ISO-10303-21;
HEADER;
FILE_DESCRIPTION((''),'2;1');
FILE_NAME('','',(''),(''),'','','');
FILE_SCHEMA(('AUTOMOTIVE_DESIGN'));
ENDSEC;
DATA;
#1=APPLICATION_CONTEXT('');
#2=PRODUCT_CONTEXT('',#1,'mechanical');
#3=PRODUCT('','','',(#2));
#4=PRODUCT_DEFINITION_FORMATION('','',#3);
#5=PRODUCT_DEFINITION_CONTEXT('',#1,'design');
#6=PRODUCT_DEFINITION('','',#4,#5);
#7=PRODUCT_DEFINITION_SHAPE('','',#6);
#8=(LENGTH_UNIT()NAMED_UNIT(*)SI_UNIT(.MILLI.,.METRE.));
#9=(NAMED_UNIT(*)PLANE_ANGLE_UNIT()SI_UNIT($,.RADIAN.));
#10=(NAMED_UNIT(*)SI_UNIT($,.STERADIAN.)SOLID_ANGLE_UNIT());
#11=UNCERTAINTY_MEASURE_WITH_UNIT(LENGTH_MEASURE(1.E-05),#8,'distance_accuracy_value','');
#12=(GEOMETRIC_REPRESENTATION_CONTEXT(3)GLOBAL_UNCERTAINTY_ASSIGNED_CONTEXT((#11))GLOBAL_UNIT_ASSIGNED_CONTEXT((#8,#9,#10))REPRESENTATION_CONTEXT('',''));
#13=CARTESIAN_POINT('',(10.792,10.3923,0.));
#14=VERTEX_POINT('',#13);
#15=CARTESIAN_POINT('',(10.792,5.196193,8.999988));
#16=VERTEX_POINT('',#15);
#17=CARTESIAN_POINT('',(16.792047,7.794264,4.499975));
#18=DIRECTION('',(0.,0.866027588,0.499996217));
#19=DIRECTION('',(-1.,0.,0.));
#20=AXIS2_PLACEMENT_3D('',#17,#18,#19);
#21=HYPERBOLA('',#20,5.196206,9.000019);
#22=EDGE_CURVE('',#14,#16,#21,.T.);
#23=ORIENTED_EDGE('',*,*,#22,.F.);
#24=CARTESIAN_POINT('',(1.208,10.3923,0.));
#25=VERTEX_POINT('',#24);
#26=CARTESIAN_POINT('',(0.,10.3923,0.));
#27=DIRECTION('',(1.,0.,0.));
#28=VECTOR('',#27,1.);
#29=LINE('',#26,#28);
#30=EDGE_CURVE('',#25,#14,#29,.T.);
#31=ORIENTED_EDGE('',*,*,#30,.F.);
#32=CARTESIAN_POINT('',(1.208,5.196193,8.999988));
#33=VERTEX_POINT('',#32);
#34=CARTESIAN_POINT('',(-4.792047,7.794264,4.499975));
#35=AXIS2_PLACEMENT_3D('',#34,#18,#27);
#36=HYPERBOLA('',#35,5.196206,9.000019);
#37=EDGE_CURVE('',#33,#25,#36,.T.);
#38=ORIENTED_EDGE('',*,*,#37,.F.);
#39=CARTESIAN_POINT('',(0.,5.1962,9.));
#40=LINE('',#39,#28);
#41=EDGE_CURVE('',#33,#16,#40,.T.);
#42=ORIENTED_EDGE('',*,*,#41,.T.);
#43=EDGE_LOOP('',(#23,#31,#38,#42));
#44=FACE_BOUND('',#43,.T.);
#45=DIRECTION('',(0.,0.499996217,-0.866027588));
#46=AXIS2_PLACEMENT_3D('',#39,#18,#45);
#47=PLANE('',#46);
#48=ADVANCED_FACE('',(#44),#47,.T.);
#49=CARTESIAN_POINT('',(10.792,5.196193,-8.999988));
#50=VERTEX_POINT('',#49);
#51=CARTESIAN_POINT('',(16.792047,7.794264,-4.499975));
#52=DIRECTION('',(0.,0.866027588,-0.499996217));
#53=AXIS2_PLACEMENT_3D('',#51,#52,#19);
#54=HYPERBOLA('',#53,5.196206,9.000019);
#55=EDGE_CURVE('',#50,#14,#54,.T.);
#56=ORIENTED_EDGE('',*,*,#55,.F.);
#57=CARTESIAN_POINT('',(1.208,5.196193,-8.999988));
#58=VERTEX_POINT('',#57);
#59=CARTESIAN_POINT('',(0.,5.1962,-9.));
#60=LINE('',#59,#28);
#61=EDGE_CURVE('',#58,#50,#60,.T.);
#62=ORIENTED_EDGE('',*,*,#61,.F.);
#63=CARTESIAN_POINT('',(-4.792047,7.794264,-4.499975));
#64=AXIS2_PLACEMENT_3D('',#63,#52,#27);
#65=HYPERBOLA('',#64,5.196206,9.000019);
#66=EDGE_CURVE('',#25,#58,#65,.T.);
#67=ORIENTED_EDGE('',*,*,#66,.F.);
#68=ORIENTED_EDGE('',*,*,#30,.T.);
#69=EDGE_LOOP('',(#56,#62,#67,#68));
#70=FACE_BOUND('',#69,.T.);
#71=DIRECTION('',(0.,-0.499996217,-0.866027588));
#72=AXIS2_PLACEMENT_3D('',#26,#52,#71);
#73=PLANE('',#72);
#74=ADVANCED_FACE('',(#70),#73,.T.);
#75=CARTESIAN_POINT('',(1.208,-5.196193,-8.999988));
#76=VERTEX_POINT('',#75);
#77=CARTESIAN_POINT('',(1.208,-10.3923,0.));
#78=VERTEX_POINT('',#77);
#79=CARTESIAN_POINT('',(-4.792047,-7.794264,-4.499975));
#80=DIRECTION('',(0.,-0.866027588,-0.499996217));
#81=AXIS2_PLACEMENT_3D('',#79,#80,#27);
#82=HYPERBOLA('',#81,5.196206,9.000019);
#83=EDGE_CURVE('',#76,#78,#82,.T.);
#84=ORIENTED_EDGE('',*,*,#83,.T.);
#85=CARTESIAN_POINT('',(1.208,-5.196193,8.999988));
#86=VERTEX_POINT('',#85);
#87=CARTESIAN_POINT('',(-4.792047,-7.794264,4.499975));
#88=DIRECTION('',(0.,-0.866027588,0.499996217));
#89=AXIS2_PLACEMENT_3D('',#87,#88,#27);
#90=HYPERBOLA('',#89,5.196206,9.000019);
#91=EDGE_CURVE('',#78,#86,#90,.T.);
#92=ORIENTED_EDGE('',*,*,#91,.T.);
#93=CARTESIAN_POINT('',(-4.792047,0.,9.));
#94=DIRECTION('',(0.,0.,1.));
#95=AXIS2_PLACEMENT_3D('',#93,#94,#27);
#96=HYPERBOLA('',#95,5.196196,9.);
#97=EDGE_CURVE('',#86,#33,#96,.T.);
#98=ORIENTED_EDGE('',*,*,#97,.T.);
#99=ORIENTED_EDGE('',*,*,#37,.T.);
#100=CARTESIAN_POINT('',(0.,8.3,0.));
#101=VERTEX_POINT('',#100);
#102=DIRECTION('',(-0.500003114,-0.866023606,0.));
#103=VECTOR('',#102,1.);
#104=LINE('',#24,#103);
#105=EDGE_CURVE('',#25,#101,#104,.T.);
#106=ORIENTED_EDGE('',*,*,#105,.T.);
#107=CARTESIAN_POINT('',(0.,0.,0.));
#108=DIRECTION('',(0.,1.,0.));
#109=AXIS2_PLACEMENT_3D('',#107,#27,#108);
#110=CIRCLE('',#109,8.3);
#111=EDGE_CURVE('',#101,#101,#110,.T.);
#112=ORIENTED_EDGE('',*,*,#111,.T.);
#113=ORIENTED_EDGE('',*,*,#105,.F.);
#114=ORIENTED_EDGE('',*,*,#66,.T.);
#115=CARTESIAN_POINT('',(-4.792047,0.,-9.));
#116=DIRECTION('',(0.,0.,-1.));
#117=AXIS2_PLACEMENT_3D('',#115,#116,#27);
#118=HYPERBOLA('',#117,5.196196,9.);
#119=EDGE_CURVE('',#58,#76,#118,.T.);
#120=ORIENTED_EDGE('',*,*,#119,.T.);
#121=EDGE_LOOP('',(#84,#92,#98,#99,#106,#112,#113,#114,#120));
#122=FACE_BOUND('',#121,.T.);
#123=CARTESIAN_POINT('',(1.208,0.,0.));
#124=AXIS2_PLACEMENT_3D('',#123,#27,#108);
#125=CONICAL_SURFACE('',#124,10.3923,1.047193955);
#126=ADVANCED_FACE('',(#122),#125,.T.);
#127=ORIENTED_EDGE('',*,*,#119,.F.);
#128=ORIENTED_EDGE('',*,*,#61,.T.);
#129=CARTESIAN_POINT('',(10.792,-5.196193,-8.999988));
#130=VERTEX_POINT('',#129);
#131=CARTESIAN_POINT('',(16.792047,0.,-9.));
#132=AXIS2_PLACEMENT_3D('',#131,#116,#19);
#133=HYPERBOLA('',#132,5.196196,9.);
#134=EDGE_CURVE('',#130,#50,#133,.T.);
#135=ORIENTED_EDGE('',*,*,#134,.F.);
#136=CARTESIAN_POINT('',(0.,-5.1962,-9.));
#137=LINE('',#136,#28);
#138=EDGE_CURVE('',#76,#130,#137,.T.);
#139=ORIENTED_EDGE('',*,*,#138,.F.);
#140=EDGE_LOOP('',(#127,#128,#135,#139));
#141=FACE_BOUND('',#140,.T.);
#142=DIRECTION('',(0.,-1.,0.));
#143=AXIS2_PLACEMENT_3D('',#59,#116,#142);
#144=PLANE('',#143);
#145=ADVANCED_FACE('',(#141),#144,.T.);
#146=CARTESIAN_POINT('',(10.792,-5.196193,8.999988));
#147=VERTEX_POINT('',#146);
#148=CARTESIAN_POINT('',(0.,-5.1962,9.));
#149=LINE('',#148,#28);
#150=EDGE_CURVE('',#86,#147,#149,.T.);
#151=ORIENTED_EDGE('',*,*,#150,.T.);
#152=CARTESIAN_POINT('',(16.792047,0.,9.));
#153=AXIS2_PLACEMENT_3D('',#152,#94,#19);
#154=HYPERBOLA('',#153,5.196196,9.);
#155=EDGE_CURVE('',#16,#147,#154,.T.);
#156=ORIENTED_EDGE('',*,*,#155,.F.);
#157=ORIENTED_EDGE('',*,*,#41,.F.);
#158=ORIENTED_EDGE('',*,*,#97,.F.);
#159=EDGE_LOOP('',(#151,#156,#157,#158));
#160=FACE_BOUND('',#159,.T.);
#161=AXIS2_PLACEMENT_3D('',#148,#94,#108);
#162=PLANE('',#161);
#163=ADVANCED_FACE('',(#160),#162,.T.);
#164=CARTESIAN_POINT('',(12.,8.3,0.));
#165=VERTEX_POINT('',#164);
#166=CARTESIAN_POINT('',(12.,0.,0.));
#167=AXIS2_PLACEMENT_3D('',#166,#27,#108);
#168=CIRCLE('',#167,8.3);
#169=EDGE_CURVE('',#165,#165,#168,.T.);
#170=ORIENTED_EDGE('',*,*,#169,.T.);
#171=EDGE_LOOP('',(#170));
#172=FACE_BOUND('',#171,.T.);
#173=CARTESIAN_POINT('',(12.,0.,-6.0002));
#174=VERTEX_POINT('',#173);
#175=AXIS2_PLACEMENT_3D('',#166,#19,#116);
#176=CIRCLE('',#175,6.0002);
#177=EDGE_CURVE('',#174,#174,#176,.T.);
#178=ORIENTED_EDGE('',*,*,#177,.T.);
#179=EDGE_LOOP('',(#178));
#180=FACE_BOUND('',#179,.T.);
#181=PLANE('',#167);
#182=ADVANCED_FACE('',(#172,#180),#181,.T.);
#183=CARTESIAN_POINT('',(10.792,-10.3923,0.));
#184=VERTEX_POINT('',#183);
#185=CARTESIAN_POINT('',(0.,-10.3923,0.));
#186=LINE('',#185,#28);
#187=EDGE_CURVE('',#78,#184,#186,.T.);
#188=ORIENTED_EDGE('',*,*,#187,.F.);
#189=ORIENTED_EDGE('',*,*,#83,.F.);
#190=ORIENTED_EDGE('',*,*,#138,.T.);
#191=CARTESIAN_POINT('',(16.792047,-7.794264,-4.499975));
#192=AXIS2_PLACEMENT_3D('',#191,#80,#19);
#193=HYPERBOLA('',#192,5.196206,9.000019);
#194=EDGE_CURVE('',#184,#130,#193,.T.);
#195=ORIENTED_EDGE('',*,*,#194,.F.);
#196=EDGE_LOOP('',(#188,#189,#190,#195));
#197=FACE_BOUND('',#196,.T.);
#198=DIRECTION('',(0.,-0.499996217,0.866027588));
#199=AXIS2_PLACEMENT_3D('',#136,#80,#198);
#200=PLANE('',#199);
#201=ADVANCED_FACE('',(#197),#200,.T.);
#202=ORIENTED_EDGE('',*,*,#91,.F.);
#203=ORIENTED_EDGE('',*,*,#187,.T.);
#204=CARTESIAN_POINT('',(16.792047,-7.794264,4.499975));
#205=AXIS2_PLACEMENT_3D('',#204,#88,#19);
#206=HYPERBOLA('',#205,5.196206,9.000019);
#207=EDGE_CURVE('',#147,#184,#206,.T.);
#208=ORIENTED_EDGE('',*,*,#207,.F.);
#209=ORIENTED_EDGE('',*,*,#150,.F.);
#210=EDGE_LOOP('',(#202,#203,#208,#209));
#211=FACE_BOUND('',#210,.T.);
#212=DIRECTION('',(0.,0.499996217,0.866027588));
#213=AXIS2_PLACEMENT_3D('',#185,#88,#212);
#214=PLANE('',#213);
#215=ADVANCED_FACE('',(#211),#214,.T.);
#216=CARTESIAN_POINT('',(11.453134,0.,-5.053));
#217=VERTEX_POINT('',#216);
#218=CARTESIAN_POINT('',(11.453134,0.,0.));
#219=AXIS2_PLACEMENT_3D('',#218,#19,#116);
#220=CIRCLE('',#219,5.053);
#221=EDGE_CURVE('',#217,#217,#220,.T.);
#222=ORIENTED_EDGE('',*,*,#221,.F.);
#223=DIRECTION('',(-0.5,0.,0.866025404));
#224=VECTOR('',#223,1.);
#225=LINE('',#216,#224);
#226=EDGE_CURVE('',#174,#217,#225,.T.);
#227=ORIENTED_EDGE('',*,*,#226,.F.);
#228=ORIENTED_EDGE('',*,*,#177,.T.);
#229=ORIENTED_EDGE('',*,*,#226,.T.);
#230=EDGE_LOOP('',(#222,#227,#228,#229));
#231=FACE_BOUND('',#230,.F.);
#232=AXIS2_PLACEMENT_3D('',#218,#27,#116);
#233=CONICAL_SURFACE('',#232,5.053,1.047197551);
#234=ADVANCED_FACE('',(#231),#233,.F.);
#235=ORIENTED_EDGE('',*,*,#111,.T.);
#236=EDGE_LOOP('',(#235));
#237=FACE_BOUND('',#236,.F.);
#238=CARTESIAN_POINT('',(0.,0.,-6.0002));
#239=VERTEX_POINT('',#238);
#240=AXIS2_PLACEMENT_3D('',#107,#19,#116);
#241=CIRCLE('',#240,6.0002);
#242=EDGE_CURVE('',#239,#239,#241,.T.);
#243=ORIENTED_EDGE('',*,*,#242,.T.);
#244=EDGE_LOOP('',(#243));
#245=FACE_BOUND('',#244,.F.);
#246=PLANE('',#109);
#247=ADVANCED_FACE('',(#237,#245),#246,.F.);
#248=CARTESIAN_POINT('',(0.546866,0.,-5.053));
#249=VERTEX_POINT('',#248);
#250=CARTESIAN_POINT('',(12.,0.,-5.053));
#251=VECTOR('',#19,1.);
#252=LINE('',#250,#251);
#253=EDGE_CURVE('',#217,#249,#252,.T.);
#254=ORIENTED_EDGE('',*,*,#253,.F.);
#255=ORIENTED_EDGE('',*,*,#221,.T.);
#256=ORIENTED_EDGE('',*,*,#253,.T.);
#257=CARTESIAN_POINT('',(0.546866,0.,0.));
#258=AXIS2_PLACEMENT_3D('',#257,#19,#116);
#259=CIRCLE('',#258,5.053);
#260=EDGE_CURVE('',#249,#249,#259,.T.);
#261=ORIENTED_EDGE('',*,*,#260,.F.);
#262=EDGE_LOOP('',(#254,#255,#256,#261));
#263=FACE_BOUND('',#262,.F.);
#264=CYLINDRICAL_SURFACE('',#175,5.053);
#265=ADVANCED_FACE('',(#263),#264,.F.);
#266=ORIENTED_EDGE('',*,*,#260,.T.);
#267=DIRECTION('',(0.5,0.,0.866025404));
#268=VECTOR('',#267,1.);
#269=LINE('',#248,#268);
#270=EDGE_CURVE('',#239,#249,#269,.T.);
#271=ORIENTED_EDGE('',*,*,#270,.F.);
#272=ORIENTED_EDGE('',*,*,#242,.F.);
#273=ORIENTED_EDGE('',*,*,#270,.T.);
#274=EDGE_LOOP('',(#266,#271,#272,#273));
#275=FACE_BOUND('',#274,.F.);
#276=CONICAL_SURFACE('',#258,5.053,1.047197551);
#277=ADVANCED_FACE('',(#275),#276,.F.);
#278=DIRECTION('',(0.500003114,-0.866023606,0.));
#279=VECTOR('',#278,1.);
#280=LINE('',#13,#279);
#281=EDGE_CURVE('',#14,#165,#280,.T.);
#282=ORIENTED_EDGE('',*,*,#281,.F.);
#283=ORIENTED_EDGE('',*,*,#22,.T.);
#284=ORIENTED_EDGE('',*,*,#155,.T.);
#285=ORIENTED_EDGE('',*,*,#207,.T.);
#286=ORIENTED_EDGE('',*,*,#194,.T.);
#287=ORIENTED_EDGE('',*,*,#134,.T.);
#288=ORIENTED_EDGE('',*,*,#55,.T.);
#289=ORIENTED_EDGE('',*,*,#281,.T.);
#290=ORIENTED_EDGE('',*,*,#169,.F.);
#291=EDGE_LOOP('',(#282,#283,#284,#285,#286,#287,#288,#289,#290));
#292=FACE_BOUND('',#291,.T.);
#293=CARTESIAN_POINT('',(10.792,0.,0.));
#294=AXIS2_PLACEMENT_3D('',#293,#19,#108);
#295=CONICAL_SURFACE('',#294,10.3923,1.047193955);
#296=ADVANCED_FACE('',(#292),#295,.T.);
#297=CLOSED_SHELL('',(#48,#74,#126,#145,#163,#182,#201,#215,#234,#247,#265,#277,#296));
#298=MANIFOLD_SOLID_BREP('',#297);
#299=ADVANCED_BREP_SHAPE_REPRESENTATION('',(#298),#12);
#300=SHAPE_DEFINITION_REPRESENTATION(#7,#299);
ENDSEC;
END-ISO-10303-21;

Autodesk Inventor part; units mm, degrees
ref_plane "YZ Plane" through (0, 0, 0) normal (1, 0, 0) x (0, 1, 0)
ref_plane "XZ Plane" through (0, 0, 0) normal (0, 1, 0) x (-1, 0, 0)
sketch "Skizze1" plane through (0, 0, 0) normal (1, 0, 0) x (0, 1, 0)
  line L0 (-10.3923, 0) -> (-5.1962, 9)
  line L1 (-5.1962, 9) -> (5.1962, 9)
  line L2 (5.1962, 9) -> (10.3923, 0)
  line L3 (10.3923, 0) -> (5.1962, -9)
  line L4 (5.1962, -9) -> (-5.1962, -9)
  line L5 (-5.1962, -9) -> (-10.3923, 0)
  point P0 (0, 0)
  point P1 (0, 0)
  dimension "d0" = 20.7846
extrude "Körper" add sketch "Skizze1" along normal blind 12
sketch "Skizze2" plane through (0, 0, 0) normal (0, 0, 1) x (1, 0, 0)
  line L0 (0, 5.1962) -> (0, 10.3923) projected
  line L1 (0, 10.3923) -> (12, 10.3923) projected
  line L2 (12, 5.1962) -> (12, 10.3923) projected
  line L3 (-2.4, 0) -> (14.4, 0) projected
  line L4 (1.208, 10.3923) -> (0, 8.3)
  line L5 (10.792, 10.3923) -> (12, 8.3)
  dimension "d3" = 30
  dimension "d4" = 30
  dimension "d5" = 16.6
  dimension "d6" = 16.6
revolve "Fase1" cut sketch "Skizze2" angle 360 about axis through (-10, 0, 0) along (1, 0, 0)
sketch "Skizze3" plane through (12, 0, 0) normal (1, 0, 0) x (0, 0, -1)
  arc A0 (-0.625, -1.0825) -> (0.625, -1.0825) centre (0, 0) ccw projected
hole "Gewinde" at (12, 0, 0) direction (-1, 0, 0) diameter 10.106 end through all thread size "M12x1.75" class "6H" standard "ISO Metric profile"
chamfer "Fase2" distance 0.9472 angle 30 1 edges at (12, 0, 5.053) measured on face at (12, 7.125, -0.8651)
chamfer "Fase3" distance 0.9472 angle 30 1 edges at (0, 0, 5.053) measured on face at (0, 7.125, -0.8651)
ref_plane "Work Plane1" through (-18.2383, 0, 0) normal (0, -0.8660254, -0.5) x (1, 0, 0)
equation "\"d0\" = 1.1547 * SW"
equation "\"d1\" = KOH"
equation "\"d3\" = ANG1"
equation "\"d4\" = ANG2"
equation "\"d5\" = SW0"
equation "\"d6\" = SW01"
equation "\"d8\" = -0.5 * GD1 + 0.5 * NND"
equation "\"d40\" = -0.5 * GD1 + 0.5 * NND"
equation "\"d10\" = -0.5 * GD1 + 0.5 * NND"
equation "\"d41\" = -0.5 * GD1 + 0.5 * NND"
equation "\"ANG1\" = 30deg"
equation "\"ANG2\" = 30deg"
equation "\"NND\" = 12"
equation "\"KOH\" = 12"
equation "\"SW\" = 18"
equation "\"SW0\" = 16.6"
equation "\"SW01\" = SW0"
equation "\"GUL\" = 0.541266 * PTC"
equation "\"THREADDIA\" = 12"
equation "\"TOA\" = 30deg"
equation "\"PTC\" = 1.75"
equation "\"E0\" = 1.155 * SW"
equation "\"GAL\" = 0.541266 * PTC"
equation "\"GD1\" = 10.105569"
properties part number "ISO 4033 - M12" material "Stahl"
